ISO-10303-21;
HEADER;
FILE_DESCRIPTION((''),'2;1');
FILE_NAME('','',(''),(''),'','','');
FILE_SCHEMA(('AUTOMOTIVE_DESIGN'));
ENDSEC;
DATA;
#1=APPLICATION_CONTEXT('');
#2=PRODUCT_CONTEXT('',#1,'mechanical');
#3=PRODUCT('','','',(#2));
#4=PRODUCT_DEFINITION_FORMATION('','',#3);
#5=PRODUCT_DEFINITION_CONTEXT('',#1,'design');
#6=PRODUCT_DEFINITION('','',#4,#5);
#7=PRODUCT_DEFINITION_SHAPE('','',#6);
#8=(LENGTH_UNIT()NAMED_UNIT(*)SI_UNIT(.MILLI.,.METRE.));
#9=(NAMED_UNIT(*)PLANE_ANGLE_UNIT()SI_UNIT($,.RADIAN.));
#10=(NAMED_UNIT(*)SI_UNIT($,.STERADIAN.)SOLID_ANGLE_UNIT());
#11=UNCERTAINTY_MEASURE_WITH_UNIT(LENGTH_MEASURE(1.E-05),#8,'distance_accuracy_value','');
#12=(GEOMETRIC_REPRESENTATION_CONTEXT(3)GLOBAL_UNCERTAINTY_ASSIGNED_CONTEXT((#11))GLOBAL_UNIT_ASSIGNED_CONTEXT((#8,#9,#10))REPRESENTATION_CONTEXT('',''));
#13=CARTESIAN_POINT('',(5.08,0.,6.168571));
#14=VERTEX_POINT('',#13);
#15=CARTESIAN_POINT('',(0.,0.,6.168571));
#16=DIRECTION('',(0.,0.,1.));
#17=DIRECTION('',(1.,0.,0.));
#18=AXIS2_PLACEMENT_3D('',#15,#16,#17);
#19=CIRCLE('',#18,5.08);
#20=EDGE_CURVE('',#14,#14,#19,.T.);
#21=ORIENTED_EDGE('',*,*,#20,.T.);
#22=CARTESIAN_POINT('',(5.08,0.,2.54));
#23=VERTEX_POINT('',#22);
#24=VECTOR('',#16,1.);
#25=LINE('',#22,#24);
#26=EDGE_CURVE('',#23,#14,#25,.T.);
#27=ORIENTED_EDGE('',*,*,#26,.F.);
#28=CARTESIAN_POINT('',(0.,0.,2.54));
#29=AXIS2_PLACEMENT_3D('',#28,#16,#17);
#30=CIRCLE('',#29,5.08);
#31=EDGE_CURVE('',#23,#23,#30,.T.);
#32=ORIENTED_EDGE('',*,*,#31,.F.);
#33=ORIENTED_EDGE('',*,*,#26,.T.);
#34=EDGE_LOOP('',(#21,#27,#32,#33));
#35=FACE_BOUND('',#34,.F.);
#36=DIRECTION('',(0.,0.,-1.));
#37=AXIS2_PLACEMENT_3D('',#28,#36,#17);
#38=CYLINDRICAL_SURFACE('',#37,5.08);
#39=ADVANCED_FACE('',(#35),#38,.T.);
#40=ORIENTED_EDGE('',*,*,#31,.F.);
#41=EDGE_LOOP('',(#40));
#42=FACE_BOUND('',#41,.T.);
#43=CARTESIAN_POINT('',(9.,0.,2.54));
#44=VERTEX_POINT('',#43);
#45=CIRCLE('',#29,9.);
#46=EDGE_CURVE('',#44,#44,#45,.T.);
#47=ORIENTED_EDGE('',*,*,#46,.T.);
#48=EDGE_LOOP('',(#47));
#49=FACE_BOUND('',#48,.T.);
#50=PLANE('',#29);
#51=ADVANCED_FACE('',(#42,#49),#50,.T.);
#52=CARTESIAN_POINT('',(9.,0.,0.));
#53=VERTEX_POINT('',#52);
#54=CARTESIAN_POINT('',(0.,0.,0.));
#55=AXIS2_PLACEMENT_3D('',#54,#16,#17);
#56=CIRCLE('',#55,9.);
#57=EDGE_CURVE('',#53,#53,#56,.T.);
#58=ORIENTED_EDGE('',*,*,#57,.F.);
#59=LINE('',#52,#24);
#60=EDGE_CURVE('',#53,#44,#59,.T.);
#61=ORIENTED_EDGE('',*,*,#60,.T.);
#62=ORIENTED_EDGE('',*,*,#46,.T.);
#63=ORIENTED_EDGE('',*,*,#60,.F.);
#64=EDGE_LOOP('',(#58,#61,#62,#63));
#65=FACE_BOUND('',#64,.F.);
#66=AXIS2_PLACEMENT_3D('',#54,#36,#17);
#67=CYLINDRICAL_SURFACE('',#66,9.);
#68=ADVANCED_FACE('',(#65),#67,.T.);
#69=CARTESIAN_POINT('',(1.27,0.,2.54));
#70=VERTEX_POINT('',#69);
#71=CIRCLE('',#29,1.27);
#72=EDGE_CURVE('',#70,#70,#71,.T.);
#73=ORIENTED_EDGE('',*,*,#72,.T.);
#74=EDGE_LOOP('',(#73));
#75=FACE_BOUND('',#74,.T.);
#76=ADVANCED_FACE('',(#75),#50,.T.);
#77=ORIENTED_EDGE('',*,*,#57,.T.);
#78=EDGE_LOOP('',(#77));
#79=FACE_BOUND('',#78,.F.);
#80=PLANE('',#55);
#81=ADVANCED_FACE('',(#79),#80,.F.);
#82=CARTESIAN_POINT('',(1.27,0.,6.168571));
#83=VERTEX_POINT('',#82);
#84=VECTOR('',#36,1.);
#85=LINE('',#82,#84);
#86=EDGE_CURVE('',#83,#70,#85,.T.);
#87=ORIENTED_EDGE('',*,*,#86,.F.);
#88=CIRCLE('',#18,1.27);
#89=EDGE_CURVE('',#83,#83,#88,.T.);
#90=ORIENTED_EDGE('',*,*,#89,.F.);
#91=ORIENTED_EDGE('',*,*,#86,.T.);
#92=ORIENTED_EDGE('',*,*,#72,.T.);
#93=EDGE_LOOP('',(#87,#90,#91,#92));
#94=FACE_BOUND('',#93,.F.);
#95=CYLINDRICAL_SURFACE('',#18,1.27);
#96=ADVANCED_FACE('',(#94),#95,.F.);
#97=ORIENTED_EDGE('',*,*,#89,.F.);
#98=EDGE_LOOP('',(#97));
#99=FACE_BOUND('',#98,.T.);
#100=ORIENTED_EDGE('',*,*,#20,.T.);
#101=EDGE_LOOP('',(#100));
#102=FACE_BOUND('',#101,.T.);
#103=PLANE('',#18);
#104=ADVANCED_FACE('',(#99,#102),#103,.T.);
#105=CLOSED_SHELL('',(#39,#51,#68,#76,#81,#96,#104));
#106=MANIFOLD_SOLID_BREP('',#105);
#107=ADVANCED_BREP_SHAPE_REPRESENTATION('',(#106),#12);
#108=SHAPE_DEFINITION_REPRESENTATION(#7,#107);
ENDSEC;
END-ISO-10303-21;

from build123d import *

# Parameters (mm, degrees)
F0_R     = 9
F1_DEPTH = 2.54
F2_R     = 5.08
F3_DEPTH = 3.6285714286
F4_R     = 1.27
F5_DEPTH = 3.6285714286


# Not quite as in the source:
# - a length typed as a fraction of an inch, garbled in the dataset ("3 / 203.2 mm" for 3/8 in), is restored


with BuildPart() as f1:
    # F0 (on Top) → F1 (new body)
    with BuildSketch(Plane.XY):
        Circle(F0_R)
    extrude(amount=F1_DEPTH)

    # F2 (on face) → F3 (join)
    with BuildSketch(Plane.XY.offset(2.54)):
        Circle(F2_R)
    extrude(amount=F3_DEPTH)

    # F4 (on face) → F5 (cut)
    with BuildSketch(Plane.XY.offset(6.1685714286)):
        Circle(F4_R)
    extrude(amount=-F5_DEPTH, mode=Mode.SUBTRACT)


solid = f1.part
